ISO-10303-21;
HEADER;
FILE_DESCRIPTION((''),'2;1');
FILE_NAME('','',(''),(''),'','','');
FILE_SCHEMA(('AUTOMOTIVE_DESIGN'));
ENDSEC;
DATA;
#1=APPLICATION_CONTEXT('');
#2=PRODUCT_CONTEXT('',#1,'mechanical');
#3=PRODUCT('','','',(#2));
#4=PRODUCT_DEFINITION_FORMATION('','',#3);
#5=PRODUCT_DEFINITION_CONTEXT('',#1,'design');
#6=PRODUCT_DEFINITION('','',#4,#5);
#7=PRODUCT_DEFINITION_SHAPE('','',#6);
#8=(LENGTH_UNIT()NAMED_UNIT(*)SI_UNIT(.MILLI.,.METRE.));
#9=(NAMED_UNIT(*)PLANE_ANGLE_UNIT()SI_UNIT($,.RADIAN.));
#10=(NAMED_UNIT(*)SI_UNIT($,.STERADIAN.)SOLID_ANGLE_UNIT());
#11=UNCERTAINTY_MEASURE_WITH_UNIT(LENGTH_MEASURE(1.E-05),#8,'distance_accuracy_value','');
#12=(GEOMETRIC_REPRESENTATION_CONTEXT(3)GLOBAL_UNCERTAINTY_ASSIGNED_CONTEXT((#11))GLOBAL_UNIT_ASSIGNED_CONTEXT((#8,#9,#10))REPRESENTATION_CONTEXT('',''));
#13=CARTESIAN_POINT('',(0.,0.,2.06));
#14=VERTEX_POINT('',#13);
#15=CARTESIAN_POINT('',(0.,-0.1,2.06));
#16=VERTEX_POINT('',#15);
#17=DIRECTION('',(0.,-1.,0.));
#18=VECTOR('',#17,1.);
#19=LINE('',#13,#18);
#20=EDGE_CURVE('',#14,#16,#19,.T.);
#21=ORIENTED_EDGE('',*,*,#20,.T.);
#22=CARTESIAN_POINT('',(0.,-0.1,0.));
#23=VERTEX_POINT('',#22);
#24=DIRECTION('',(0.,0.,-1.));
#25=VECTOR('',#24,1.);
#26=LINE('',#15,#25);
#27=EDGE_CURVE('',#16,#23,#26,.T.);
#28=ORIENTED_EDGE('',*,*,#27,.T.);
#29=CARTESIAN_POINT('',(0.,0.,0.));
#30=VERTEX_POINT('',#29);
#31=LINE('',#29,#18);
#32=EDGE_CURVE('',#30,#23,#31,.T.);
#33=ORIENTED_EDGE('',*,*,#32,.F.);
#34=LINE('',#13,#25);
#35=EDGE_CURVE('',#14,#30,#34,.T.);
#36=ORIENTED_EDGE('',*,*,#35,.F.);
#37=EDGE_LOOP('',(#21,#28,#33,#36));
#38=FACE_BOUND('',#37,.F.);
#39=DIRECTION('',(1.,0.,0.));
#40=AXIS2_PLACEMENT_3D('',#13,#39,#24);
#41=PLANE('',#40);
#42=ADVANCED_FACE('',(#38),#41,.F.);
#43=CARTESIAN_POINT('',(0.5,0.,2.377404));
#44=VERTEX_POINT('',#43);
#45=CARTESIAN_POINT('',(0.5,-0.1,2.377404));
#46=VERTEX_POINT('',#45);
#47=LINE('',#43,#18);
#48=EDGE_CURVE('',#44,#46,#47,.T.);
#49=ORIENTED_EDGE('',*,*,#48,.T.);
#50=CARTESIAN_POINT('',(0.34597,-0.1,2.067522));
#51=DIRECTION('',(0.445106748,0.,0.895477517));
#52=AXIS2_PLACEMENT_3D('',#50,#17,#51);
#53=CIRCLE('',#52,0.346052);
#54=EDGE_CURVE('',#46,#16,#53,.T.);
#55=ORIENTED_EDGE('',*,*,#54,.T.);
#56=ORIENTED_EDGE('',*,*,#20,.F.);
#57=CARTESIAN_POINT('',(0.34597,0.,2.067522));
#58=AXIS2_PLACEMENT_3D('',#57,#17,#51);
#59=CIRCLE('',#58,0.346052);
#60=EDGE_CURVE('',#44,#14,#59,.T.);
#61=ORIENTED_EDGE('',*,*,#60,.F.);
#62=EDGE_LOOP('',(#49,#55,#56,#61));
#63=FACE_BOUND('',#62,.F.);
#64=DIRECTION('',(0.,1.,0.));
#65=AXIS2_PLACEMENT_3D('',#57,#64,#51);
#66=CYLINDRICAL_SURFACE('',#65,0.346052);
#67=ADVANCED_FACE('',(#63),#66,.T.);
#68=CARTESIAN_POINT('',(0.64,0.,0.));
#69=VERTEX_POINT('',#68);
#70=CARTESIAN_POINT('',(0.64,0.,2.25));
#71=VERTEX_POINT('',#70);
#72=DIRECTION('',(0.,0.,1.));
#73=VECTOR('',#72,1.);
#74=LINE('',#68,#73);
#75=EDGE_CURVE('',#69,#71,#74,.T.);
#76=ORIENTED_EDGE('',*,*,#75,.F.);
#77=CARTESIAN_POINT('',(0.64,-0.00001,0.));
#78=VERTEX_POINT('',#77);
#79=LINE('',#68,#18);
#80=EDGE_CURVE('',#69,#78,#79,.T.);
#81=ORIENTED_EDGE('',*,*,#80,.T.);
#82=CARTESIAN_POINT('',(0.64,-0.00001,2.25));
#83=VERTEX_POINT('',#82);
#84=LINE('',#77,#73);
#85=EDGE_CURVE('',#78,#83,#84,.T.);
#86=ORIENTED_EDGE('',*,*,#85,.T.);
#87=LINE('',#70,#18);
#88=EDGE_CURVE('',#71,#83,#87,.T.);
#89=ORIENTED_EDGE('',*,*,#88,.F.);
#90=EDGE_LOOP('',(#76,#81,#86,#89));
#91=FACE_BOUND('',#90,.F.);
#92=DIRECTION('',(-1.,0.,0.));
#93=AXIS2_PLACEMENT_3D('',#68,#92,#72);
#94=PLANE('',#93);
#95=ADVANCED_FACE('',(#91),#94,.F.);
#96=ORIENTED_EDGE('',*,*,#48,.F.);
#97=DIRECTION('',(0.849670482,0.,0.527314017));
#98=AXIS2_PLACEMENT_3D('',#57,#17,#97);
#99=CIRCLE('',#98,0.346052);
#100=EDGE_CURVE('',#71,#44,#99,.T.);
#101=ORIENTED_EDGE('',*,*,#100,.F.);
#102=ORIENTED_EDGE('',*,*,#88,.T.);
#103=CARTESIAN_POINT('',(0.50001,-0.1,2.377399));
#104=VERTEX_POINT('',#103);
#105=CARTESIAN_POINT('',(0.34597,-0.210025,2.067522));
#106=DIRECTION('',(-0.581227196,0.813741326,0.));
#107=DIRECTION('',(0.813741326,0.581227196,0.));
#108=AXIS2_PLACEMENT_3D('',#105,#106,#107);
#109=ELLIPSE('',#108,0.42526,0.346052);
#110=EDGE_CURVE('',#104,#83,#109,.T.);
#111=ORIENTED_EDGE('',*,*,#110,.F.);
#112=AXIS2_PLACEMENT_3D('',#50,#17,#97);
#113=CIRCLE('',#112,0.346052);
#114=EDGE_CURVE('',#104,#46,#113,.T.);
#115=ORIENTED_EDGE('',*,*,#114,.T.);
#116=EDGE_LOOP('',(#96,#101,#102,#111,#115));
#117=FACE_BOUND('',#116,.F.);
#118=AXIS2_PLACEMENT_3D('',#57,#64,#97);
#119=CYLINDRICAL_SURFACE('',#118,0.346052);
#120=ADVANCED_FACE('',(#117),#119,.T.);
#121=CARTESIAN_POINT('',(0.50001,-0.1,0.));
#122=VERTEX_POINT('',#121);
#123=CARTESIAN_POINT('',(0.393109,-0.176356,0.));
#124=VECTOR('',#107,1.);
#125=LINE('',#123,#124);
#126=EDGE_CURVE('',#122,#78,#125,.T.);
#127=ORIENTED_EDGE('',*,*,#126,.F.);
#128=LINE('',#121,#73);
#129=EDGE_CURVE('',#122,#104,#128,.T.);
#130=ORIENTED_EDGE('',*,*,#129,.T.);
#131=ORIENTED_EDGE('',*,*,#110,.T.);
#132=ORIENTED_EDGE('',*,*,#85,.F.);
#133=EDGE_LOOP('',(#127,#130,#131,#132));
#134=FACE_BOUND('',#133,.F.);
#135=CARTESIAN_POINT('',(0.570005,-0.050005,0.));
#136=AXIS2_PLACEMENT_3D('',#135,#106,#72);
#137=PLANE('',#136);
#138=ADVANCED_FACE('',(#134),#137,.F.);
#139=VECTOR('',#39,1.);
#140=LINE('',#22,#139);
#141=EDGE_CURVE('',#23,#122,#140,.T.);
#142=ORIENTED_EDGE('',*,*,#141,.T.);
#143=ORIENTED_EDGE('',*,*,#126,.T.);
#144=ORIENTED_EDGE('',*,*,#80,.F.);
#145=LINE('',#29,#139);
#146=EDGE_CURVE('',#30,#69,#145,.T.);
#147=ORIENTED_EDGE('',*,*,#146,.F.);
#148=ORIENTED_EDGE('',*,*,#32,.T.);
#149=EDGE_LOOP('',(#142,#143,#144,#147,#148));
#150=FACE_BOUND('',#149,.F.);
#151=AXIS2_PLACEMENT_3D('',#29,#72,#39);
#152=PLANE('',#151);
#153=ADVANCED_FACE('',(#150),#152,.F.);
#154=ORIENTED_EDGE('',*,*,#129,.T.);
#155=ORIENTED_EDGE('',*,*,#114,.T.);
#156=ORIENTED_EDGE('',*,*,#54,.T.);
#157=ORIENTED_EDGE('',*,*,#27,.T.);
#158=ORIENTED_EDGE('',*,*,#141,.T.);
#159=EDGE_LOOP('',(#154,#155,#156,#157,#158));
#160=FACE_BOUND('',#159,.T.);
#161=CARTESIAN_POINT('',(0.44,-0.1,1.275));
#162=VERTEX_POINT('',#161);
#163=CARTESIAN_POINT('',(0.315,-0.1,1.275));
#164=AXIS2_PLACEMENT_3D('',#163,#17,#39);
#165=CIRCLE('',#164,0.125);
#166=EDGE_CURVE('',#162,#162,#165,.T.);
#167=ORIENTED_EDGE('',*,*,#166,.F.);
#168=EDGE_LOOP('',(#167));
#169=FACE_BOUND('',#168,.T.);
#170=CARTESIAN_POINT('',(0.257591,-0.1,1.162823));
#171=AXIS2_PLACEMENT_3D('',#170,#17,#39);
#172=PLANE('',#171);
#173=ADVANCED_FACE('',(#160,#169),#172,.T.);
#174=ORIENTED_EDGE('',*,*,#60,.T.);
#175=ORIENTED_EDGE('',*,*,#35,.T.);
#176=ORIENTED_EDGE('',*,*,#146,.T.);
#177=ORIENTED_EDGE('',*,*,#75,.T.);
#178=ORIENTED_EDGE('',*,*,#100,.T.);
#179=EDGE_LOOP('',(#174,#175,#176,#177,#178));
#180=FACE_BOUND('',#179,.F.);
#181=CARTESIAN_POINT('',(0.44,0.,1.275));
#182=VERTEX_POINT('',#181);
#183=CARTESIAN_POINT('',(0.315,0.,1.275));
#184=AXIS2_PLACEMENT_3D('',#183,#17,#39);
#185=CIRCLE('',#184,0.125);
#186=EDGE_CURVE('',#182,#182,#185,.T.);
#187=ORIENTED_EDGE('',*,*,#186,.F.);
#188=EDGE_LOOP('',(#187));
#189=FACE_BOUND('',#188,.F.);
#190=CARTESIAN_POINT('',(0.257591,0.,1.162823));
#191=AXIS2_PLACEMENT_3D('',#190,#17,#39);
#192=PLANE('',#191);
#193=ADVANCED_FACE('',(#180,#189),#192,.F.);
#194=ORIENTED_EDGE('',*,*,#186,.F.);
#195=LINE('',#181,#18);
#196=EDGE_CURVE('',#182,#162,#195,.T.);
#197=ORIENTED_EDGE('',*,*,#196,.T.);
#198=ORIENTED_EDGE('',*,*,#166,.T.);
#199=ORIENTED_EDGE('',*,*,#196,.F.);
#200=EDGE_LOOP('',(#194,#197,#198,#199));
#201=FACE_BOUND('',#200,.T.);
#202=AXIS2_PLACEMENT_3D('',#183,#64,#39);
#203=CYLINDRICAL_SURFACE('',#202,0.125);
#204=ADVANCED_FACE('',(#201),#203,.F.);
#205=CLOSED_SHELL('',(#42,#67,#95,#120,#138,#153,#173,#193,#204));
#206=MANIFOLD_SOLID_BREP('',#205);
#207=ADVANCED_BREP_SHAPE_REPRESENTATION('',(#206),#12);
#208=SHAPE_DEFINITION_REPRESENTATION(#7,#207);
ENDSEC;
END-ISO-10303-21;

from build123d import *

# Parameters (mm, degrees)
F0_R     = 0.125
F1_DEPTH = 0.1
F2_SIZE2 = 0.09999
F2_SIZE  = 0.13999


# Not quite as in the source:
# - a fillet or chamfer is up to 0.001 mm smaller than in the source, because OpenCascade refuses the exact size


with BuildPart() as f1:
    # F0 (on Front) → F1 (new body)
    with BuildSketch(Plane.XZ):
        with BuildLine():
            Line((0, 2.06), (0, 0))
            Line((0, 0), (0.5, 0))
            Line((0.5, 0), (0.5, 2.3774036342))
            ThreePointArc((0.5, 2.3774036342), (0.1605070536, 2.3596783794), (0, 2.06))
        make_face()
        with Locations((0.315, 1.275)):
            Circle(F0_R, mode=Mode.SUBTRACT)
        with BuildLine():
            Line((0.5, 2.3774036342), (0.5, 0))
            Line((0.5, 0), (0.64, 0))
            Line((0.64, 0), (0.64, 2.25))
            ThreePointArc((0.64, 2.25), (0.5788806325, 2.3234604755), (0.5, 2.3774036342))
        make_face()
    extrude(amount=F1_DEPTH)

    # F2 (size 0.14 and 0.1 in the source; OpenCascade refuses exactly that, so slightly less here)
    f2_edges = [f1.edges().sort_by_distance(p)[0] for p in [
        (0.64, -0.1, 1.125),
    ]]
    f2_side = f1.faces().sort_by_distance((0.02497, -0.1, 1.03))[0]
    chamfer(f2_edges, length=F2_SIZE, length2=F2_SIZE2, reference=f2_side)


solid = f1.part
